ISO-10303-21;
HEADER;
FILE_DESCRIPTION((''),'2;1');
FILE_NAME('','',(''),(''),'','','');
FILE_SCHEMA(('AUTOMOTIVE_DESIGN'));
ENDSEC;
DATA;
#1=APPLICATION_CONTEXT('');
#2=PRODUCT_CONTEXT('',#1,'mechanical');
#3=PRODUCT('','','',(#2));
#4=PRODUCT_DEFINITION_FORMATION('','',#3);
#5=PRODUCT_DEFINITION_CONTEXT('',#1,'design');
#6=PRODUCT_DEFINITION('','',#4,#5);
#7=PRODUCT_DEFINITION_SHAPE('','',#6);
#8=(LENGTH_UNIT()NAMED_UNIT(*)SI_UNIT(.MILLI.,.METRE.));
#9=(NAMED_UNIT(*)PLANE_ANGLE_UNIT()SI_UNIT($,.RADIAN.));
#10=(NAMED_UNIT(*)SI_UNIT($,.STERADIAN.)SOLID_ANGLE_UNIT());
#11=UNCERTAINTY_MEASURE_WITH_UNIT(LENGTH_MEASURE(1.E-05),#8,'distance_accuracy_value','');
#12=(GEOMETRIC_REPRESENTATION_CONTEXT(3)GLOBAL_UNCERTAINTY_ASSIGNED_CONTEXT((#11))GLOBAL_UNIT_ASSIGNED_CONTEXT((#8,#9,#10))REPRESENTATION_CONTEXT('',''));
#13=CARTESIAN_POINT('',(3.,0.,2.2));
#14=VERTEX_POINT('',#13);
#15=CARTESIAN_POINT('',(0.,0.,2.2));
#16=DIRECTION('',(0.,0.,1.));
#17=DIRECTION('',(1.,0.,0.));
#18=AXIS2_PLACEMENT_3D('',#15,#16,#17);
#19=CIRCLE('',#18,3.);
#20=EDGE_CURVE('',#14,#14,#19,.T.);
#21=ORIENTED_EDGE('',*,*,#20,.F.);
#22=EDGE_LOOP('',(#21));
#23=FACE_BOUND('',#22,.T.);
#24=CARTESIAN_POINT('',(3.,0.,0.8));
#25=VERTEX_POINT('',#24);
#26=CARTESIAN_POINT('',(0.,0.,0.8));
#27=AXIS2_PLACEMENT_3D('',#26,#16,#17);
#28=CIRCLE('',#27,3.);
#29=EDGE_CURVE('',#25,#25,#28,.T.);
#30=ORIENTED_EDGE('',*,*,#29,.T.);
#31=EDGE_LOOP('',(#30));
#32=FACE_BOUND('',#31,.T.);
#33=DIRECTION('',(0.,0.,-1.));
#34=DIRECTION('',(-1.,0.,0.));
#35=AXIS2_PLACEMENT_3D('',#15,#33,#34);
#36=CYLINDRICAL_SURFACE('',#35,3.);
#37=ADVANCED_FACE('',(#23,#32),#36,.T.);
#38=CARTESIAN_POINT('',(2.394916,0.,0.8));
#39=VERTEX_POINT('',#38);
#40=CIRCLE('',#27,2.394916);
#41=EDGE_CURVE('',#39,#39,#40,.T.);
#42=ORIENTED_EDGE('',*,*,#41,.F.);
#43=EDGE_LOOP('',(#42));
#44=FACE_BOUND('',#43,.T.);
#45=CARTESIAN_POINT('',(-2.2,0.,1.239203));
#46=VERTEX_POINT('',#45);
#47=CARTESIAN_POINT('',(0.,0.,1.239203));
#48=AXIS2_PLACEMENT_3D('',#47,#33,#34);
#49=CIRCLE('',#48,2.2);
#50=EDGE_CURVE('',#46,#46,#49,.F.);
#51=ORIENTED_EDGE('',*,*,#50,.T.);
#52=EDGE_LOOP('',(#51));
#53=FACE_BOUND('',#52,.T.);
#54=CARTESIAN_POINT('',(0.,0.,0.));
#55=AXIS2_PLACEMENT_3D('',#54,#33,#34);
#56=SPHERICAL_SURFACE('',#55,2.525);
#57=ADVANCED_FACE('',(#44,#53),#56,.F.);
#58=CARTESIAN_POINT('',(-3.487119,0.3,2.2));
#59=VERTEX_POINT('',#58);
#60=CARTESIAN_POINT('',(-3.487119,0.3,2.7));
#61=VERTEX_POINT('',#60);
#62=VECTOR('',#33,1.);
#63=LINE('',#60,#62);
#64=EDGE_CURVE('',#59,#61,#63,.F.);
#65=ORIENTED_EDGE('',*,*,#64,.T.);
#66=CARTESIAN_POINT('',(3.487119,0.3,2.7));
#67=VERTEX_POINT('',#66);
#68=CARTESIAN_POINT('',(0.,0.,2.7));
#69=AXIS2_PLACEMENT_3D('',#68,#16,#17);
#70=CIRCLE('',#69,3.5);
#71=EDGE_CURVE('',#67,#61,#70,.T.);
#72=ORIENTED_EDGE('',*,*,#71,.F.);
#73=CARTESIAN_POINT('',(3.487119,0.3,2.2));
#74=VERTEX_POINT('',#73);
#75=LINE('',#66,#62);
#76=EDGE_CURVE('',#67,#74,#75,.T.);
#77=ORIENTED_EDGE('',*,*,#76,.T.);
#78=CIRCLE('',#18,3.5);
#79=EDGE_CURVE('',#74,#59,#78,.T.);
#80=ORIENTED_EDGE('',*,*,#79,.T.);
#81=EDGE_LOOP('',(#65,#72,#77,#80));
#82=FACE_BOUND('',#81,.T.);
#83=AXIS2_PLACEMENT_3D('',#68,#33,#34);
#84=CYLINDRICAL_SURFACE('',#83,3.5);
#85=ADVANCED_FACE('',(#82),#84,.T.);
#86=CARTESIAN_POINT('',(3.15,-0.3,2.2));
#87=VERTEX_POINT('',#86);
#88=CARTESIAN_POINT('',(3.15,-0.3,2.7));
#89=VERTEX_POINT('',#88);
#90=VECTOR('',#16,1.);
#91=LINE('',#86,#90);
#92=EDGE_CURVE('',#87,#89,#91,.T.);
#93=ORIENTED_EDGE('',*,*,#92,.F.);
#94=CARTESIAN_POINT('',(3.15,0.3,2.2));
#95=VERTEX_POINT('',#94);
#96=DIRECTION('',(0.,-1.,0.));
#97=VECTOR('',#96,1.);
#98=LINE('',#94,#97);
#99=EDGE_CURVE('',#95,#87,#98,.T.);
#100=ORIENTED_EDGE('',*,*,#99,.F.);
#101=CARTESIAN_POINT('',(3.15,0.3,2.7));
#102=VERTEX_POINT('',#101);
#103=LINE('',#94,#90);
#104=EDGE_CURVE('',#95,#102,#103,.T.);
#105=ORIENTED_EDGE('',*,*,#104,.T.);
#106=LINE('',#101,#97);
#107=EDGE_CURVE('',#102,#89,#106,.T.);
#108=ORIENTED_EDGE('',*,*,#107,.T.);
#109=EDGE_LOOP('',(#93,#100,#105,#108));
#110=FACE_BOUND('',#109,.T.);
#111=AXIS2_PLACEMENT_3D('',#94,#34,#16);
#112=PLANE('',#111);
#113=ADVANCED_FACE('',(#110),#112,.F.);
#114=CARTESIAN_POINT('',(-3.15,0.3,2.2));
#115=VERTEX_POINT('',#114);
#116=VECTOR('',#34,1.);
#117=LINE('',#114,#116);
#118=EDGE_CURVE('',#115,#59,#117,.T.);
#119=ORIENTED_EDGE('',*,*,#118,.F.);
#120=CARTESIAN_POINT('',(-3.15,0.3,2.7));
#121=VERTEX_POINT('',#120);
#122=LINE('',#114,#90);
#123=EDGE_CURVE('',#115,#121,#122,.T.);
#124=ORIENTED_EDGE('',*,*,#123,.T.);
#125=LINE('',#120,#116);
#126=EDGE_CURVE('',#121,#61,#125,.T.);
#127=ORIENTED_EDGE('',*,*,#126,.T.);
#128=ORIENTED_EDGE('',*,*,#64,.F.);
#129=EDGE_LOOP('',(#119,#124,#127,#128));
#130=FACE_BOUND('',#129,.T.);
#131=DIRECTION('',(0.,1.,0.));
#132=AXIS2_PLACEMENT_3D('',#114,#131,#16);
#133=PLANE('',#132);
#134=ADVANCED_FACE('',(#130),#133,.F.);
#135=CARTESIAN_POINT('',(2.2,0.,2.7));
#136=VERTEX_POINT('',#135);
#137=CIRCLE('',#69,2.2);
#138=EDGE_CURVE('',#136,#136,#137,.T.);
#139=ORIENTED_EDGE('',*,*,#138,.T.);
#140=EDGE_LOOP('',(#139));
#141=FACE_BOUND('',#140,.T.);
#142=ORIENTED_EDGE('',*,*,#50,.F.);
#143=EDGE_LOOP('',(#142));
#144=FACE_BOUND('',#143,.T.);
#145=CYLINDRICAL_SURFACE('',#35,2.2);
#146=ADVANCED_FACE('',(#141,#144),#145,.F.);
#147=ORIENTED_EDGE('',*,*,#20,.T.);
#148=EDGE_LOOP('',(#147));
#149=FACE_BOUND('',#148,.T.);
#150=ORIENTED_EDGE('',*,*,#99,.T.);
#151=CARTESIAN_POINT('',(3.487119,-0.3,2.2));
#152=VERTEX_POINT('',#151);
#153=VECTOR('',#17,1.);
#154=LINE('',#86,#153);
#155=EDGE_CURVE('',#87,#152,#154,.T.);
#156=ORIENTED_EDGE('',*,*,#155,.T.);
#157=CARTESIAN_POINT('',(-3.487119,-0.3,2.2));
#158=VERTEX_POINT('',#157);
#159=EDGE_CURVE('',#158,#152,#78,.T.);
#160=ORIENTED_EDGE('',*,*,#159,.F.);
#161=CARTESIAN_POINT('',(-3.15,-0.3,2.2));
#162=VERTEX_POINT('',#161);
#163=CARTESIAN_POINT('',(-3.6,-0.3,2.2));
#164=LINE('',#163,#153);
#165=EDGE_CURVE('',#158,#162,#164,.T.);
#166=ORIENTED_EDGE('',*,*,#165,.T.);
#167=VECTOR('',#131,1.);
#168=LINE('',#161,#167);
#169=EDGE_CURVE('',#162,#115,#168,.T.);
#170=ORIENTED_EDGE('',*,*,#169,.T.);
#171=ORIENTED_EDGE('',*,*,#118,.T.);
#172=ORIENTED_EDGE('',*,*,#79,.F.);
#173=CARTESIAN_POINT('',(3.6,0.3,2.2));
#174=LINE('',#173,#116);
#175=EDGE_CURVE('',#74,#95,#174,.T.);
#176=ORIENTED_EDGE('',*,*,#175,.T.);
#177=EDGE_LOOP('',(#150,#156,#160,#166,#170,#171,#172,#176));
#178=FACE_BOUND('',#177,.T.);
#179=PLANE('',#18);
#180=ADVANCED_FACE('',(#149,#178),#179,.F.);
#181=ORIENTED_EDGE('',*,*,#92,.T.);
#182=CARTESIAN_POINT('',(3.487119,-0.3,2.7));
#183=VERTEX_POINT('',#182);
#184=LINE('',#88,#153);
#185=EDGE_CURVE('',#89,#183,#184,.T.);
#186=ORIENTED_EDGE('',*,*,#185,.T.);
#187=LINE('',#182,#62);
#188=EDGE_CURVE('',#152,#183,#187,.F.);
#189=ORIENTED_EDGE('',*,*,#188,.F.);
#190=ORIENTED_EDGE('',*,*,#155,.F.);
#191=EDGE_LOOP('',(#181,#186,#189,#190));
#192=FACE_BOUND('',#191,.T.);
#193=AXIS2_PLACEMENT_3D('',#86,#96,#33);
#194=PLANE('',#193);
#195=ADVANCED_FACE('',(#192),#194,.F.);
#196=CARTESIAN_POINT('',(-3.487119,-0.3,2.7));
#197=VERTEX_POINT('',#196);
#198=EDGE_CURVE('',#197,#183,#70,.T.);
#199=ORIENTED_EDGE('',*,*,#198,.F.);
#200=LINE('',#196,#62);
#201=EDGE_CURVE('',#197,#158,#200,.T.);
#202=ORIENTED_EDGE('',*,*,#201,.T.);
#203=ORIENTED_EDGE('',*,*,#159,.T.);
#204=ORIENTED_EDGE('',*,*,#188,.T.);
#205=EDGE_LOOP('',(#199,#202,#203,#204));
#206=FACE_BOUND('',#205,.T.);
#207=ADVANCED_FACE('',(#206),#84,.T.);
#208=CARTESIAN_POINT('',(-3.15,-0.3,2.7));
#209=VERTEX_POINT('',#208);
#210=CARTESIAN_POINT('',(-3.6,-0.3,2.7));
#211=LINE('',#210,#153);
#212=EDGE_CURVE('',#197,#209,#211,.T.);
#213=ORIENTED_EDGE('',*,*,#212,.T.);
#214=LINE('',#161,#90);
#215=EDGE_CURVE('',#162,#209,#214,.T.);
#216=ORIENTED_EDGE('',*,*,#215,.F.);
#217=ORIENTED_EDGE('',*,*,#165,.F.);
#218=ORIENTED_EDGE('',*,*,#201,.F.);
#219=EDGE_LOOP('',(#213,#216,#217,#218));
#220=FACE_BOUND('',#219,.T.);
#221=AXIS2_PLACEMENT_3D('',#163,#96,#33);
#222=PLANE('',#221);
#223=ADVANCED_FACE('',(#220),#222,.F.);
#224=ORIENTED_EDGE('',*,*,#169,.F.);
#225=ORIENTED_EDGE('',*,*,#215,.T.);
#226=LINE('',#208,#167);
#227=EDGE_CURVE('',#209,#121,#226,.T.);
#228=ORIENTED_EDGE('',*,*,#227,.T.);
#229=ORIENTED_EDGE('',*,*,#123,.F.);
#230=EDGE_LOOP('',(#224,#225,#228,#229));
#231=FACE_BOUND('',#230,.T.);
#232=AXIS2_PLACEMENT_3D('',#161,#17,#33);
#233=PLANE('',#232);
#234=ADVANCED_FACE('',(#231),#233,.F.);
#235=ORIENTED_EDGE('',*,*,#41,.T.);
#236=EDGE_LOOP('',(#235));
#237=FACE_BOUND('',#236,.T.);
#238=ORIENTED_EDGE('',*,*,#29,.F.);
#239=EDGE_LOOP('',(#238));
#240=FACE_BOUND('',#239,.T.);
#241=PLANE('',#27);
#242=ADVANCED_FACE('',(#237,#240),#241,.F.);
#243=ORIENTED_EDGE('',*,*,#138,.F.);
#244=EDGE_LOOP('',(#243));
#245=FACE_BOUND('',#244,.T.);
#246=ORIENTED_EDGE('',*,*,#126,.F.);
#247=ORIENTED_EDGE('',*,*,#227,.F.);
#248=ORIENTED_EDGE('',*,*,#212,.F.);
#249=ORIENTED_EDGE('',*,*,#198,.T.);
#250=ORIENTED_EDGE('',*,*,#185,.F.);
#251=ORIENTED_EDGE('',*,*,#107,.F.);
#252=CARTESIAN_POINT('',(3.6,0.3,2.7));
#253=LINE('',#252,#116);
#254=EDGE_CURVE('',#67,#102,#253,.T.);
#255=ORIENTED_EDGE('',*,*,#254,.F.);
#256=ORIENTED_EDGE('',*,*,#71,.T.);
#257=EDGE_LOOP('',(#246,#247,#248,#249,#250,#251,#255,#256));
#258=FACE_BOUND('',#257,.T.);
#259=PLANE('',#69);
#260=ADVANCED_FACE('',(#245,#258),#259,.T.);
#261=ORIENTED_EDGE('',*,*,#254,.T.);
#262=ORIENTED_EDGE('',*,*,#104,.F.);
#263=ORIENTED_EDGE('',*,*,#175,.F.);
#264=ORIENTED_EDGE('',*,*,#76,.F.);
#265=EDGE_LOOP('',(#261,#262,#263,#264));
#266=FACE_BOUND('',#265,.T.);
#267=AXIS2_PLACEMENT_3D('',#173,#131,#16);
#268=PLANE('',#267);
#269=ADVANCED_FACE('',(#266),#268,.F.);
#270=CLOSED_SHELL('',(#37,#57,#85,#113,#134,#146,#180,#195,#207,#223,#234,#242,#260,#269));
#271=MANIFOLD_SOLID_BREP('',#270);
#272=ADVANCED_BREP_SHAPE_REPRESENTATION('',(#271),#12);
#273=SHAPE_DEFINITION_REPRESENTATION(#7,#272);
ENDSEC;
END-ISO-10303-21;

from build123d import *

# Parameters (mm, degrees)
M6X0P35_MALE_THREAD_MAJOR_ENVELOPE_START = 0.8
SKETCH1_R                                = 3
SKETCH1_R_2                              = 2.2
M6X0P35_MALE_THREAD_MAJOR_ENVELOPE_DEPTH = 1.4
BALL_RETENTION_CAP_FLANGE_START          = 2.2
SKETCH2_R                                = 3.5
SKETCH2_R_2                              = 2.2
BALL_RETENTION_CAP_FLANGE_DEPTH          = 0.5
SKETCH3_W                                = 0.45
SKETCH3_H                                = 0.6
OPPOSED_PIN_TOOL_NOTCHES_DEPTH           = 0.5


# Read off the part's stored shape, not the designer's step: Upper_Spherical_Bearing_Seat_D5p05
with BuildPart() as part:
    # Sketch1 → M6x0p35_Male_Thread_Major_Envelope (new body)
    with BuildSketch(Plane.XY.offset(M6X0P35_MALE_THREAD_MAJOR_ENVELOPE_START)):
        Circle(SKETCH1_R)
        Circle(SKETCH1_R_2, mode=Mode.SUBTRACT)
    extrude(amount=M6X0P35_MALE_THREAD_MAJOR_ENVELOPE_DEPTH)

    # Sketch2 → Ball_Retention_Cap_Flange (add)
    with BuildSketch(Plane.XY.offset(BALL_RETENTION_CAP_FLANGE_START)):
        Circle(SKETCH2_R)
        Circle(SKETCH2_R_2, mode=Mode.SUBTRACT)
    extrude(amount=BALL_RETENTION_CAP_FLANGE_DEPTH)

    # Upper_Spherical_Bearing_Seat_D5p05 outli → Upper_Spherical_Bearing_Seat_D5p05 (revolve, cut)
    with BuildSketch(Plane.XZ):
        with BuildLine():
            Line((2.199999999, 0.799999998), (2.394916492, 0.799999998))
            ThreePointArc((2.394916492, 0.799999998), (2.307929655, 1.024248851), (2.199999999, 1.239203375))
            Line((2.199999999, 1.239203375), (2.199999999, 0.799999998))
        make_face()
    revolve(axis=Axis((0, 0, 0), (0, 0, 1)), mode=Mode.SUBTRACT)

    # Sketch3 → Opposed_Pin_Tool_Notches (cut)
    with BuildSketch(Plane.XY.offset(2.7)):
        with Locations((-3.375, 0)):
            Rectangle(SKETCH3_W, SKETCH3_H)
        with Locations((3.375, 0)):
            Rectangle(SKETCH3_W, SKETCH3_H)
    extrude(amount=-OPPOSED_PIN_TOOL_NOTCHES_DEPTH, mode=Mode.SUBTRACT)


solid = part.part
